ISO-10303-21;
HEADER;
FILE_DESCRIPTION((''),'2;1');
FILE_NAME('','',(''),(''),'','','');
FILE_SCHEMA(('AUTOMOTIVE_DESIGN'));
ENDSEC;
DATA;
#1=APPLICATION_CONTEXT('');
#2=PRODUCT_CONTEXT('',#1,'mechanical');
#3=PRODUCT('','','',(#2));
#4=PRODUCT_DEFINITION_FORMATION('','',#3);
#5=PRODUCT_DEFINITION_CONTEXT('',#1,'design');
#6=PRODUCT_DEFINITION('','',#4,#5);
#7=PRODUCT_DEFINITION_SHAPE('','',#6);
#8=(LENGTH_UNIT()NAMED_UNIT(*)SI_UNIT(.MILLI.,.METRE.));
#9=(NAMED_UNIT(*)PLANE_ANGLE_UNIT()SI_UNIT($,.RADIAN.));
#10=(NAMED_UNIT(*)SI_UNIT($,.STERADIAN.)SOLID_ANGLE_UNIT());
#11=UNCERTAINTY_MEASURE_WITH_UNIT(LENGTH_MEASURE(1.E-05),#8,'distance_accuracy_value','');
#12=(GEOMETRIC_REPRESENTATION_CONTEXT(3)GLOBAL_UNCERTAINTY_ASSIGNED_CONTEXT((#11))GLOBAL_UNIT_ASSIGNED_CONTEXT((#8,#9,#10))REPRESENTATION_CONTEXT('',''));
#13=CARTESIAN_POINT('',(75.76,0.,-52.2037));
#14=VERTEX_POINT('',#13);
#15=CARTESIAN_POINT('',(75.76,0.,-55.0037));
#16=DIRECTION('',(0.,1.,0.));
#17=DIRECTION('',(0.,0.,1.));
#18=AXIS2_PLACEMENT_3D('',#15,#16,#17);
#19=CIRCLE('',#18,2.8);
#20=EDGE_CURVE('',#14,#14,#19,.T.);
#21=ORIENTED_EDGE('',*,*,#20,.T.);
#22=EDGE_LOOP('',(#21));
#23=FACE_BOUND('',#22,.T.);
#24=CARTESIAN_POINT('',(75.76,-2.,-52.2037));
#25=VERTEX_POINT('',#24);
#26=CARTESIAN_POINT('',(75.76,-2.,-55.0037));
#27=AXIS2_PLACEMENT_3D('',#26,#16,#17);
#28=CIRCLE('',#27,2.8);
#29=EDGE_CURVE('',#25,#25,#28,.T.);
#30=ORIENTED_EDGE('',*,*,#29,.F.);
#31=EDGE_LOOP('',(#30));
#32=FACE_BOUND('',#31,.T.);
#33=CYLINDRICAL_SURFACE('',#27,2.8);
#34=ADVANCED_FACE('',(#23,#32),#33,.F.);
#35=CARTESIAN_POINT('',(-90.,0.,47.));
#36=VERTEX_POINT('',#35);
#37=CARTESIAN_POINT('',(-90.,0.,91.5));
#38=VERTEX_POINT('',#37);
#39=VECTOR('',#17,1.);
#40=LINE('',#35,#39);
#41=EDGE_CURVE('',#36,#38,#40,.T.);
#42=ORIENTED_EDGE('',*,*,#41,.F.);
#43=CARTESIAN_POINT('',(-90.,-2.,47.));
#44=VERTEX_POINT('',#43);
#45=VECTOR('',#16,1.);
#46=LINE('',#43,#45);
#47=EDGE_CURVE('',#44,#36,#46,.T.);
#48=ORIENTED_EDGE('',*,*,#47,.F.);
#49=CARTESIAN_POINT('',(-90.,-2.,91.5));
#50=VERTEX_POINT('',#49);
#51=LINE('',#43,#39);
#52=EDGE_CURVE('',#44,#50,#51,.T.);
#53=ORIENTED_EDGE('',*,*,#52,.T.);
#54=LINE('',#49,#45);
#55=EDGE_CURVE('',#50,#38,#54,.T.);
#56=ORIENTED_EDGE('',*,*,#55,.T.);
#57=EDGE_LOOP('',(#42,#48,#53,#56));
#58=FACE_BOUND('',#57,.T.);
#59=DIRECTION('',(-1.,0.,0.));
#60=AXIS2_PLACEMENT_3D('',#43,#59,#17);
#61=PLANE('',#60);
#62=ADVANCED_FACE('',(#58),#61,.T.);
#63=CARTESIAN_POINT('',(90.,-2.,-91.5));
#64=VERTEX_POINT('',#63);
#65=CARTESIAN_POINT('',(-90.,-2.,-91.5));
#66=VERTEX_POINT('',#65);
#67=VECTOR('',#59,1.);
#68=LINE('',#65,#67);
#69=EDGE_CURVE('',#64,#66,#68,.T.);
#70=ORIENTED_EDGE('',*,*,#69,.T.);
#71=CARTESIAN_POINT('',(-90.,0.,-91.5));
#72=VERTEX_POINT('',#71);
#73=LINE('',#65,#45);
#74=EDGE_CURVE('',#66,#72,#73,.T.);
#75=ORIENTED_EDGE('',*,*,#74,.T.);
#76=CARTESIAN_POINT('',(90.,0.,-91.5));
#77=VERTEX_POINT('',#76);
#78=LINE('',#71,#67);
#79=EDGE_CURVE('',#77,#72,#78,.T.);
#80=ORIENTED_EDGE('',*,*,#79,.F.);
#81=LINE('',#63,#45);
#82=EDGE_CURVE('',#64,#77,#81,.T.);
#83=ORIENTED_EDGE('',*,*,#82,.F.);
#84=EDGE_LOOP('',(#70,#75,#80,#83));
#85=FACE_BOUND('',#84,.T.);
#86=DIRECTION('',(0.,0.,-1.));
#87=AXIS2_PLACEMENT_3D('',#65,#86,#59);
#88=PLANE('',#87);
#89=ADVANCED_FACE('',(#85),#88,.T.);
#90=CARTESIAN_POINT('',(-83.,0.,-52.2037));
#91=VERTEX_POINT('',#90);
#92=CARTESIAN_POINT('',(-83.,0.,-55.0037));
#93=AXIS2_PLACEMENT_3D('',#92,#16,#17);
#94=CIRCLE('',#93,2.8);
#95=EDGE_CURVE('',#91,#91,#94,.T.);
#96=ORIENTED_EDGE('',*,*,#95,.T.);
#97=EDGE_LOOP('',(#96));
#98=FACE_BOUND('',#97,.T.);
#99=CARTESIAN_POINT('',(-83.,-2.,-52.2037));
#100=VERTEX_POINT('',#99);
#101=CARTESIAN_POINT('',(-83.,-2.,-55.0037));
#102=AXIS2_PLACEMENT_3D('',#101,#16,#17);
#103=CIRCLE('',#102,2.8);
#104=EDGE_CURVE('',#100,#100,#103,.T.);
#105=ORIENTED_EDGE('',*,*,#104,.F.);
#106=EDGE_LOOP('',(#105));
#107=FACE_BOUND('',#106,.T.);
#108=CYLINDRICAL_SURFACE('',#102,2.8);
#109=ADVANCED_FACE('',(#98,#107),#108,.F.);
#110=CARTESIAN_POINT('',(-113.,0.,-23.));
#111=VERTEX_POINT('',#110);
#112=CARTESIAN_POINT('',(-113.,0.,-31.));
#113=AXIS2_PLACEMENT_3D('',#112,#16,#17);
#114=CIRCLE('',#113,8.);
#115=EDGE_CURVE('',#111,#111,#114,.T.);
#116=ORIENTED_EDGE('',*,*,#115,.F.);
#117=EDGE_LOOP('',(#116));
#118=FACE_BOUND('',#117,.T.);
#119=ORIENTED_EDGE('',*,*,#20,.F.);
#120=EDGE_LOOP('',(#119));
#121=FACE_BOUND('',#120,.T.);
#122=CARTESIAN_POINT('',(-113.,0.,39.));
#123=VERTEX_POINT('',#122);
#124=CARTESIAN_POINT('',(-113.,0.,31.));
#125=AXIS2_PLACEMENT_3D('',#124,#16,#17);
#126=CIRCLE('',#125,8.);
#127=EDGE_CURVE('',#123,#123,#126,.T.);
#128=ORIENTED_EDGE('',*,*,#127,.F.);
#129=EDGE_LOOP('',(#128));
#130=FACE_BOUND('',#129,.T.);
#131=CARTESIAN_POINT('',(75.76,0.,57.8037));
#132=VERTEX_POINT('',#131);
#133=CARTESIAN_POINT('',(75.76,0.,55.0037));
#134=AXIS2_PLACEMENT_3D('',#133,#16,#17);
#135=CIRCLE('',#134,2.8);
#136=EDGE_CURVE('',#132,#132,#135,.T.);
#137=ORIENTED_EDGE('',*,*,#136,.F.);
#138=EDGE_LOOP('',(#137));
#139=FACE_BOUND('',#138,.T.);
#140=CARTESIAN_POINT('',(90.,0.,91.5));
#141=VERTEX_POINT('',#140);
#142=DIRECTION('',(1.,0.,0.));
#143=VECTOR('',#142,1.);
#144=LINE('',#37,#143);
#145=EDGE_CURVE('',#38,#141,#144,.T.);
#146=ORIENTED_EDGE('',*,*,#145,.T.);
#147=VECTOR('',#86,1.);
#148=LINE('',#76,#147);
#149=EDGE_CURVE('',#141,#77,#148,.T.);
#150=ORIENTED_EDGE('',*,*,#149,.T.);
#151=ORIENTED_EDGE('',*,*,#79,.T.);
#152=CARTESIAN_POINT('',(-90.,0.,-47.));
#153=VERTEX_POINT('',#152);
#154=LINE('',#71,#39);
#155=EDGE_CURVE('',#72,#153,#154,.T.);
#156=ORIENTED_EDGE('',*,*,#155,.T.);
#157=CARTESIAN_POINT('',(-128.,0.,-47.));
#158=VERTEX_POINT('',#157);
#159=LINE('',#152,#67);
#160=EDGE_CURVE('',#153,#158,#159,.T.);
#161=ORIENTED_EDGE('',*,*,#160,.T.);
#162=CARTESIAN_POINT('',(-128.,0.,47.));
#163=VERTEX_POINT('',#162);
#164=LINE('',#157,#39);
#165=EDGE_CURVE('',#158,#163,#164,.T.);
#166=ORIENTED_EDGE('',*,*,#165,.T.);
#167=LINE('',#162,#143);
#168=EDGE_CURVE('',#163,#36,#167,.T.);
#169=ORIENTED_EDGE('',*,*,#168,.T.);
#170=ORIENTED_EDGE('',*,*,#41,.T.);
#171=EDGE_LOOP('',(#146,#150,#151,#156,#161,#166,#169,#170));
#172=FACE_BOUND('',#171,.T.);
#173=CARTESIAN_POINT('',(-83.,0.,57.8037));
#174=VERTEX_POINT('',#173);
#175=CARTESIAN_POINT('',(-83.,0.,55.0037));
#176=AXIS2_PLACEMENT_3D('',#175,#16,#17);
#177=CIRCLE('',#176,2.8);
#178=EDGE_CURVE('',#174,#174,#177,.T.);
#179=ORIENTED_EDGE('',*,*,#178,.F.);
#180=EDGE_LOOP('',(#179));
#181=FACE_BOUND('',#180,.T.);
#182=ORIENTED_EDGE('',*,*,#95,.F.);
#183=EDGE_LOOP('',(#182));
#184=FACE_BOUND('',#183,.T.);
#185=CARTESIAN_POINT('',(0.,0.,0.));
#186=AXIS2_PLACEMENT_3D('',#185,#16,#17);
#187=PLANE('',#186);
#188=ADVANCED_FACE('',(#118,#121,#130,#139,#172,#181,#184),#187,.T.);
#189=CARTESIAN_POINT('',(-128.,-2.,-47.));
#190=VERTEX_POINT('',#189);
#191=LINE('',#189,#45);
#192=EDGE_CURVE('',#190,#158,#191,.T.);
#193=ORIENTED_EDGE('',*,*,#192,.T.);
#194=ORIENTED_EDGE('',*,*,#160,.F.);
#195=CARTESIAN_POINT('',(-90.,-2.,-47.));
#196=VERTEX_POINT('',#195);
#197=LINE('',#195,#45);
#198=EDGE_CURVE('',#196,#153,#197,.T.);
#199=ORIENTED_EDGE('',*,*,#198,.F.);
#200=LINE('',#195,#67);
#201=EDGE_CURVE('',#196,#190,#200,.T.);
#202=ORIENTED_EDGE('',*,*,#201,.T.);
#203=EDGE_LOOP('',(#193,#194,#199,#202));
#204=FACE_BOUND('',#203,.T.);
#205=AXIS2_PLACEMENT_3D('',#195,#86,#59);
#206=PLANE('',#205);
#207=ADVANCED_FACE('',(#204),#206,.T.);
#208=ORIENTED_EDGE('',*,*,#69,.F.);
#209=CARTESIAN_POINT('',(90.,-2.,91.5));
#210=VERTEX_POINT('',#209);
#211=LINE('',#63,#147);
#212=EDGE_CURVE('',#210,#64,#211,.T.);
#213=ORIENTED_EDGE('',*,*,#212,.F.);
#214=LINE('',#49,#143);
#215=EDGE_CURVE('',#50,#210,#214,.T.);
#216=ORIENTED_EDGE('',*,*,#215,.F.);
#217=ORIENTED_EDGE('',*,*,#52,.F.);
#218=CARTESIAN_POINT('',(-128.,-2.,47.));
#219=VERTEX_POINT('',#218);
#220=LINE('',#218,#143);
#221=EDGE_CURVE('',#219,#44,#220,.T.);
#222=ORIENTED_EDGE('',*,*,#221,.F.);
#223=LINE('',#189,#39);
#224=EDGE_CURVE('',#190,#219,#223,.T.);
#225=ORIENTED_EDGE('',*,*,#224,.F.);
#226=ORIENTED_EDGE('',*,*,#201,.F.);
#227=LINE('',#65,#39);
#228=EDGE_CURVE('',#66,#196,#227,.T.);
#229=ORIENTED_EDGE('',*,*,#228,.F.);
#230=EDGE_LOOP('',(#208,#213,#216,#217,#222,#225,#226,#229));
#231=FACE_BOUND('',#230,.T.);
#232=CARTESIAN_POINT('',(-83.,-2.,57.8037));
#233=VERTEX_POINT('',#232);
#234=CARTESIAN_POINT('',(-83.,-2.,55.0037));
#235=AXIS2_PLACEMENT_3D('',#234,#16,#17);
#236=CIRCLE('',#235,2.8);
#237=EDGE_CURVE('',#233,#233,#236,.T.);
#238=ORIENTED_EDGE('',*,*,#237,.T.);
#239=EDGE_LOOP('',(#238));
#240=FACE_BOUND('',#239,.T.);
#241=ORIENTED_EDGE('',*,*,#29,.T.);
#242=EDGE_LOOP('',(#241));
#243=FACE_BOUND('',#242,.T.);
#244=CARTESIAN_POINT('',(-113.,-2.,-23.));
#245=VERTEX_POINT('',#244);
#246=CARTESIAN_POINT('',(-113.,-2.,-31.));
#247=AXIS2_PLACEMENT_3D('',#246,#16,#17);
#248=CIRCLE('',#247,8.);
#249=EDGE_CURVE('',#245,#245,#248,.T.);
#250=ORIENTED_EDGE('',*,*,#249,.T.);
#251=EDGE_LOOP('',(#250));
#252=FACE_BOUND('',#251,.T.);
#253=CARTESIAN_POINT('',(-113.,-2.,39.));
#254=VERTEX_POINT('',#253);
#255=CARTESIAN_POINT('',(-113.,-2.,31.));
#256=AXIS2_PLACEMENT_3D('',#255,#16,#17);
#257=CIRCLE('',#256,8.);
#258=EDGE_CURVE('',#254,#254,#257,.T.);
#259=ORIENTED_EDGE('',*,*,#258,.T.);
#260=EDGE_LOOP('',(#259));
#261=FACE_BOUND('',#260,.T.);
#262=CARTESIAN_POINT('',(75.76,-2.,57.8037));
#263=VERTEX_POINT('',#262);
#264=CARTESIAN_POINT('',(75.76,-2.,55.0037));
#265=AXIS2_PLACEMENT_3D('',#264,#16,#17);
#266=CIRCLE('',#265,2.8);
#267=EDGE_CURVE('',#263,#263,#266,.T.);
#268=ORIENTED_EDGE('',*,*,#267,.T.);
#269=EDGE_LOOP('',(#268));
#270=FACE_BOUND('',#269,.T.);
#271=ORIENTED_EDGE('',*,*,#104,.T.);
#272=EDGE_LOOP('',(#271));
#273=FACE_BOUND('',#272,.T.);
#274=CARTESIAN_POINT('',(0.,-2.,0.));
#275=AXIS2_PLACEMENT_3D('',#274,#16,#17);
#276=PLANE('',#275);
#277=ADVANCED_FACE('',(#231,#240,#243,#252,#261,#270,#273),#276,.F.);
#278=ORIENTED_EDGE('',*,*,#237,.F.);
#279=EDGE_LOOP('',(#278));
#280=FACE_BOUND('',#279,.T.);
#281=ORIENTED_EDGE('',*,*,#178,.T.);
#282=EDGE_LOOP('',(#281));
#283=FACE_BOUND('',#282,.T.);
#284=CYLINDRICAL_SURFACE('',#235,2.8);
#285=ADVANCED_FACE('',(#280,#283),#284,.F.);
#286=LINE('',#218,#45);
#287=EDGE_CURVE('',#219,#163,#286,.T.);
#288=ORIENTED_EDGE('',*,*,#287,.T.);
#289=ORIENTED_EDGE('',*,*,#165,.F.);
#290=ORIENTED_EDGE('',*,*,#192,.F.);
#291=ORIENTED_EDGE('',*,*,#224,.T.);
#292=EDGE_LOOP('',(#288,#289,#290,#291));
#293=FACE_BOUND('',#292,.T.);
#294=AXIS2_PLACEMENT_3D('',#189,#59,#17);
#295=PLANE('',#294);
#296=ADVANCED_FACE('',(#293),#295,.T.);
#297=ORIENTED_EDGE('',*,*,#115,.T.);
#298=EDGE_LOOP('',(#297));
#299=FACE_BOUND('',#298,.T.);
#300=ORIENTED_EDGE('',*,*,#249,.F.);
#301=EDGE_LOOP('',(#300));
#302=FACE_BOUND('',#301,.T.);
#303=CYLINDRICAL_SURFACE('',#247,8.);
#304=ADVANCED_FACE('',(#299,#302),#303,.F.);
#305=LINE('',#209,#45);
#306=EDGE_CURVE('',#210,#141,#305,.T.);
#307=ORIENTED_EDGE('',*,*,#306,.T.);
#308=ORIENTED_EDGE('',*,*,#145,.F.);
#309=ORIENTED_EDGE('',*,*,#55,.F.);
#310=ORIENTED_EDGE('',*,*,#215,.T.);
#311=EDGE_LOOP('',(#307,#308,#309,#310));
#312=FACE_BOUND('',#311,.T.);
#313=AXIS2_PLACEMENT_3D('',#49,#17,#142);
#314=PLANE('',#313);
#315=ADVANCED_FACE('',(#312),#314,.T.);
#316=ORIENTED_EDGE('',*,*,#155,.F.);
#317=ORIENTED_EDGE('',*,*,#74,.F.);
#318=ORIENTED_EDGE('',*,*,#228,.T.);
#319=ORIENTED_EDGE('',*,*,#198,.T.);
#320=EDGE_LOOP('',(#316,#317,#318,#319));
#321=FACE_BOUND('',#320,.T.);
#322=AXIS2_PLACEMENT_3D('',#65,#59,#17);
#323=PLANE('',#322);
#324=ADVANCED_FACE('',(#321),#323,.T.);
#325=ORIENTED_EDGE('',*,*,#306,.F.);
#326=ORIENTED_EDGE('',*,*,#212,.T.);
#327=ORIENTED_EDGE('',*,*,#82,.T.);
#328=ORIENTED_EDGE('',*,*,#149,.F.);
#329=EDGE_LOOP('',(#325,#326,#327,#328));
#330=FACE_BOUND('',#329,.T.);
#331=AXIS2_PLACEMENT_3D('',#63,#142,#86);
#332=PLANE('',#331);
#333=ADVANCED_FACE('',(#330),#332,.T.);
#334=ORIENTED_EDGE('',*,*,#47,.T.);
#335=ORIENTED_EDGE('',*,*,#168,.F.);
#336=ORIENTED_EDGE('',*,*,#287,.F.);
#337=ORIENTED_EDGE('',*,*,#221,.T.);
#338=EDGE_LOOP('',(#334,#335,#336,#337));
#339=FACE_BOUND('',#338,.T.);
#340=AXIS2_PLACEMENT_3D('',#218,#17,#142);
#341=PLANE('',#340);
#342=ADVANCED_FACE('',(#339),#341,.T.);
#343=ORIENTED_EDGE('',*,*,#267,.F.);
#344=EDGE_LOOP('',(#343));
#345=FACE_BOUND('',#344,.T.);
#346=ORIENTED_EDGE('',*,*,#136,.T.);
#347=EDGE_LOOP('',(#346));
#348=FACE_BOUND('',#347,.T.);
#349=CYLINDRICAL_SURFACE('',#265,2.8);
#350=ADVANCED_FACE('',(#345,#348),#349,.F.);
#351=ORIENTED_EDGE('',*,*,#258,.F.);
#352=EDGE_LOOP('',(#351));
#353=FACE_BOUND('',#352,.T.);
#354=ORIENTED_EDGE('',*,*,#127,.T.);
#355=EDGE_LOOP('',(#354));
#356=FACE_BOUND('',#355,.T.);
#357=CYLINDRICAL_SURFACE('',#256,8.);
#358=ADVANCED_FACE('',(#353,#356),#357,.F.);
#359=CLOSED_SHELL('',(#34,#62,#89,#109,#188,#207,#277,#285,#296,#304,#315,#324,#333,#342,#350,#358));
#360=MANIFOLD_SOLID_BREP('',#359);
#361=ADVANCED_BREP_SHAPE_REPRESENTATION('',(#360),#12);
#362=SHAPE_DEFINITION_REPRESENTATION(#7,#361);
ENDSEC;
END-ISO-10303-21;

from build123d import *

# Parameters (mm, degrees)
SKETCH1_R          = 2.8
SKETCH1_R_2        = 8
BASE_FLANGE1_DEPTH = 2


# Sheet-metal steps are written as plain solids
with BuildPart() as part:
    # Sketch1 → Base-Flange1 (new body)
    with BuildSketch(Plane(origin=(0, 0, 0), x_dir=(1, 0, 0), z_dir=(0, 1, 0))):
        Polygon((-90, 91.5), (90, 91.5), (90, -91.5), (-90, -91.5), (-90, -47), (-128, -47), (-128, 47), (-90, 47), align=None)
        with Locations(Location((-83, 55.0037, 0), (0, 0, 270))):
            Circle(SKETCH1_R, mode=Mode.SUBTRACT)
        with Locations(Location((-83, -55.0037, 0), (0, 0, 270))):
            Circle(SKETCH1_R, mode=Mode.SUBTRACT)
        with Locations(Location((75.76, -55.0037, 0), (0, 0, 270))):
            Circle(SKETCH1_R, mode=Mode.SUBTRACT)
        with Locations(Location((75.76, 55.0037, 0), (0, 0, 270))):
            Circle(SKETCH1_R, mode=Mode.SUBTRACT)
        with Locations(Location((-113, 31, 0), (0, 0, 270))):
            Circle(SKETCH1_R_2, mode=Mode.SUBTRACT)
        with Locations(Location((-113, -31, 0), (0, 0, 270))):
            Circle(SKETCH1_R_2, mode=Mode.SUBTRACT)
    extrude(amount=-BASE_FLANGE1_DEPTH)


solid = part.part
